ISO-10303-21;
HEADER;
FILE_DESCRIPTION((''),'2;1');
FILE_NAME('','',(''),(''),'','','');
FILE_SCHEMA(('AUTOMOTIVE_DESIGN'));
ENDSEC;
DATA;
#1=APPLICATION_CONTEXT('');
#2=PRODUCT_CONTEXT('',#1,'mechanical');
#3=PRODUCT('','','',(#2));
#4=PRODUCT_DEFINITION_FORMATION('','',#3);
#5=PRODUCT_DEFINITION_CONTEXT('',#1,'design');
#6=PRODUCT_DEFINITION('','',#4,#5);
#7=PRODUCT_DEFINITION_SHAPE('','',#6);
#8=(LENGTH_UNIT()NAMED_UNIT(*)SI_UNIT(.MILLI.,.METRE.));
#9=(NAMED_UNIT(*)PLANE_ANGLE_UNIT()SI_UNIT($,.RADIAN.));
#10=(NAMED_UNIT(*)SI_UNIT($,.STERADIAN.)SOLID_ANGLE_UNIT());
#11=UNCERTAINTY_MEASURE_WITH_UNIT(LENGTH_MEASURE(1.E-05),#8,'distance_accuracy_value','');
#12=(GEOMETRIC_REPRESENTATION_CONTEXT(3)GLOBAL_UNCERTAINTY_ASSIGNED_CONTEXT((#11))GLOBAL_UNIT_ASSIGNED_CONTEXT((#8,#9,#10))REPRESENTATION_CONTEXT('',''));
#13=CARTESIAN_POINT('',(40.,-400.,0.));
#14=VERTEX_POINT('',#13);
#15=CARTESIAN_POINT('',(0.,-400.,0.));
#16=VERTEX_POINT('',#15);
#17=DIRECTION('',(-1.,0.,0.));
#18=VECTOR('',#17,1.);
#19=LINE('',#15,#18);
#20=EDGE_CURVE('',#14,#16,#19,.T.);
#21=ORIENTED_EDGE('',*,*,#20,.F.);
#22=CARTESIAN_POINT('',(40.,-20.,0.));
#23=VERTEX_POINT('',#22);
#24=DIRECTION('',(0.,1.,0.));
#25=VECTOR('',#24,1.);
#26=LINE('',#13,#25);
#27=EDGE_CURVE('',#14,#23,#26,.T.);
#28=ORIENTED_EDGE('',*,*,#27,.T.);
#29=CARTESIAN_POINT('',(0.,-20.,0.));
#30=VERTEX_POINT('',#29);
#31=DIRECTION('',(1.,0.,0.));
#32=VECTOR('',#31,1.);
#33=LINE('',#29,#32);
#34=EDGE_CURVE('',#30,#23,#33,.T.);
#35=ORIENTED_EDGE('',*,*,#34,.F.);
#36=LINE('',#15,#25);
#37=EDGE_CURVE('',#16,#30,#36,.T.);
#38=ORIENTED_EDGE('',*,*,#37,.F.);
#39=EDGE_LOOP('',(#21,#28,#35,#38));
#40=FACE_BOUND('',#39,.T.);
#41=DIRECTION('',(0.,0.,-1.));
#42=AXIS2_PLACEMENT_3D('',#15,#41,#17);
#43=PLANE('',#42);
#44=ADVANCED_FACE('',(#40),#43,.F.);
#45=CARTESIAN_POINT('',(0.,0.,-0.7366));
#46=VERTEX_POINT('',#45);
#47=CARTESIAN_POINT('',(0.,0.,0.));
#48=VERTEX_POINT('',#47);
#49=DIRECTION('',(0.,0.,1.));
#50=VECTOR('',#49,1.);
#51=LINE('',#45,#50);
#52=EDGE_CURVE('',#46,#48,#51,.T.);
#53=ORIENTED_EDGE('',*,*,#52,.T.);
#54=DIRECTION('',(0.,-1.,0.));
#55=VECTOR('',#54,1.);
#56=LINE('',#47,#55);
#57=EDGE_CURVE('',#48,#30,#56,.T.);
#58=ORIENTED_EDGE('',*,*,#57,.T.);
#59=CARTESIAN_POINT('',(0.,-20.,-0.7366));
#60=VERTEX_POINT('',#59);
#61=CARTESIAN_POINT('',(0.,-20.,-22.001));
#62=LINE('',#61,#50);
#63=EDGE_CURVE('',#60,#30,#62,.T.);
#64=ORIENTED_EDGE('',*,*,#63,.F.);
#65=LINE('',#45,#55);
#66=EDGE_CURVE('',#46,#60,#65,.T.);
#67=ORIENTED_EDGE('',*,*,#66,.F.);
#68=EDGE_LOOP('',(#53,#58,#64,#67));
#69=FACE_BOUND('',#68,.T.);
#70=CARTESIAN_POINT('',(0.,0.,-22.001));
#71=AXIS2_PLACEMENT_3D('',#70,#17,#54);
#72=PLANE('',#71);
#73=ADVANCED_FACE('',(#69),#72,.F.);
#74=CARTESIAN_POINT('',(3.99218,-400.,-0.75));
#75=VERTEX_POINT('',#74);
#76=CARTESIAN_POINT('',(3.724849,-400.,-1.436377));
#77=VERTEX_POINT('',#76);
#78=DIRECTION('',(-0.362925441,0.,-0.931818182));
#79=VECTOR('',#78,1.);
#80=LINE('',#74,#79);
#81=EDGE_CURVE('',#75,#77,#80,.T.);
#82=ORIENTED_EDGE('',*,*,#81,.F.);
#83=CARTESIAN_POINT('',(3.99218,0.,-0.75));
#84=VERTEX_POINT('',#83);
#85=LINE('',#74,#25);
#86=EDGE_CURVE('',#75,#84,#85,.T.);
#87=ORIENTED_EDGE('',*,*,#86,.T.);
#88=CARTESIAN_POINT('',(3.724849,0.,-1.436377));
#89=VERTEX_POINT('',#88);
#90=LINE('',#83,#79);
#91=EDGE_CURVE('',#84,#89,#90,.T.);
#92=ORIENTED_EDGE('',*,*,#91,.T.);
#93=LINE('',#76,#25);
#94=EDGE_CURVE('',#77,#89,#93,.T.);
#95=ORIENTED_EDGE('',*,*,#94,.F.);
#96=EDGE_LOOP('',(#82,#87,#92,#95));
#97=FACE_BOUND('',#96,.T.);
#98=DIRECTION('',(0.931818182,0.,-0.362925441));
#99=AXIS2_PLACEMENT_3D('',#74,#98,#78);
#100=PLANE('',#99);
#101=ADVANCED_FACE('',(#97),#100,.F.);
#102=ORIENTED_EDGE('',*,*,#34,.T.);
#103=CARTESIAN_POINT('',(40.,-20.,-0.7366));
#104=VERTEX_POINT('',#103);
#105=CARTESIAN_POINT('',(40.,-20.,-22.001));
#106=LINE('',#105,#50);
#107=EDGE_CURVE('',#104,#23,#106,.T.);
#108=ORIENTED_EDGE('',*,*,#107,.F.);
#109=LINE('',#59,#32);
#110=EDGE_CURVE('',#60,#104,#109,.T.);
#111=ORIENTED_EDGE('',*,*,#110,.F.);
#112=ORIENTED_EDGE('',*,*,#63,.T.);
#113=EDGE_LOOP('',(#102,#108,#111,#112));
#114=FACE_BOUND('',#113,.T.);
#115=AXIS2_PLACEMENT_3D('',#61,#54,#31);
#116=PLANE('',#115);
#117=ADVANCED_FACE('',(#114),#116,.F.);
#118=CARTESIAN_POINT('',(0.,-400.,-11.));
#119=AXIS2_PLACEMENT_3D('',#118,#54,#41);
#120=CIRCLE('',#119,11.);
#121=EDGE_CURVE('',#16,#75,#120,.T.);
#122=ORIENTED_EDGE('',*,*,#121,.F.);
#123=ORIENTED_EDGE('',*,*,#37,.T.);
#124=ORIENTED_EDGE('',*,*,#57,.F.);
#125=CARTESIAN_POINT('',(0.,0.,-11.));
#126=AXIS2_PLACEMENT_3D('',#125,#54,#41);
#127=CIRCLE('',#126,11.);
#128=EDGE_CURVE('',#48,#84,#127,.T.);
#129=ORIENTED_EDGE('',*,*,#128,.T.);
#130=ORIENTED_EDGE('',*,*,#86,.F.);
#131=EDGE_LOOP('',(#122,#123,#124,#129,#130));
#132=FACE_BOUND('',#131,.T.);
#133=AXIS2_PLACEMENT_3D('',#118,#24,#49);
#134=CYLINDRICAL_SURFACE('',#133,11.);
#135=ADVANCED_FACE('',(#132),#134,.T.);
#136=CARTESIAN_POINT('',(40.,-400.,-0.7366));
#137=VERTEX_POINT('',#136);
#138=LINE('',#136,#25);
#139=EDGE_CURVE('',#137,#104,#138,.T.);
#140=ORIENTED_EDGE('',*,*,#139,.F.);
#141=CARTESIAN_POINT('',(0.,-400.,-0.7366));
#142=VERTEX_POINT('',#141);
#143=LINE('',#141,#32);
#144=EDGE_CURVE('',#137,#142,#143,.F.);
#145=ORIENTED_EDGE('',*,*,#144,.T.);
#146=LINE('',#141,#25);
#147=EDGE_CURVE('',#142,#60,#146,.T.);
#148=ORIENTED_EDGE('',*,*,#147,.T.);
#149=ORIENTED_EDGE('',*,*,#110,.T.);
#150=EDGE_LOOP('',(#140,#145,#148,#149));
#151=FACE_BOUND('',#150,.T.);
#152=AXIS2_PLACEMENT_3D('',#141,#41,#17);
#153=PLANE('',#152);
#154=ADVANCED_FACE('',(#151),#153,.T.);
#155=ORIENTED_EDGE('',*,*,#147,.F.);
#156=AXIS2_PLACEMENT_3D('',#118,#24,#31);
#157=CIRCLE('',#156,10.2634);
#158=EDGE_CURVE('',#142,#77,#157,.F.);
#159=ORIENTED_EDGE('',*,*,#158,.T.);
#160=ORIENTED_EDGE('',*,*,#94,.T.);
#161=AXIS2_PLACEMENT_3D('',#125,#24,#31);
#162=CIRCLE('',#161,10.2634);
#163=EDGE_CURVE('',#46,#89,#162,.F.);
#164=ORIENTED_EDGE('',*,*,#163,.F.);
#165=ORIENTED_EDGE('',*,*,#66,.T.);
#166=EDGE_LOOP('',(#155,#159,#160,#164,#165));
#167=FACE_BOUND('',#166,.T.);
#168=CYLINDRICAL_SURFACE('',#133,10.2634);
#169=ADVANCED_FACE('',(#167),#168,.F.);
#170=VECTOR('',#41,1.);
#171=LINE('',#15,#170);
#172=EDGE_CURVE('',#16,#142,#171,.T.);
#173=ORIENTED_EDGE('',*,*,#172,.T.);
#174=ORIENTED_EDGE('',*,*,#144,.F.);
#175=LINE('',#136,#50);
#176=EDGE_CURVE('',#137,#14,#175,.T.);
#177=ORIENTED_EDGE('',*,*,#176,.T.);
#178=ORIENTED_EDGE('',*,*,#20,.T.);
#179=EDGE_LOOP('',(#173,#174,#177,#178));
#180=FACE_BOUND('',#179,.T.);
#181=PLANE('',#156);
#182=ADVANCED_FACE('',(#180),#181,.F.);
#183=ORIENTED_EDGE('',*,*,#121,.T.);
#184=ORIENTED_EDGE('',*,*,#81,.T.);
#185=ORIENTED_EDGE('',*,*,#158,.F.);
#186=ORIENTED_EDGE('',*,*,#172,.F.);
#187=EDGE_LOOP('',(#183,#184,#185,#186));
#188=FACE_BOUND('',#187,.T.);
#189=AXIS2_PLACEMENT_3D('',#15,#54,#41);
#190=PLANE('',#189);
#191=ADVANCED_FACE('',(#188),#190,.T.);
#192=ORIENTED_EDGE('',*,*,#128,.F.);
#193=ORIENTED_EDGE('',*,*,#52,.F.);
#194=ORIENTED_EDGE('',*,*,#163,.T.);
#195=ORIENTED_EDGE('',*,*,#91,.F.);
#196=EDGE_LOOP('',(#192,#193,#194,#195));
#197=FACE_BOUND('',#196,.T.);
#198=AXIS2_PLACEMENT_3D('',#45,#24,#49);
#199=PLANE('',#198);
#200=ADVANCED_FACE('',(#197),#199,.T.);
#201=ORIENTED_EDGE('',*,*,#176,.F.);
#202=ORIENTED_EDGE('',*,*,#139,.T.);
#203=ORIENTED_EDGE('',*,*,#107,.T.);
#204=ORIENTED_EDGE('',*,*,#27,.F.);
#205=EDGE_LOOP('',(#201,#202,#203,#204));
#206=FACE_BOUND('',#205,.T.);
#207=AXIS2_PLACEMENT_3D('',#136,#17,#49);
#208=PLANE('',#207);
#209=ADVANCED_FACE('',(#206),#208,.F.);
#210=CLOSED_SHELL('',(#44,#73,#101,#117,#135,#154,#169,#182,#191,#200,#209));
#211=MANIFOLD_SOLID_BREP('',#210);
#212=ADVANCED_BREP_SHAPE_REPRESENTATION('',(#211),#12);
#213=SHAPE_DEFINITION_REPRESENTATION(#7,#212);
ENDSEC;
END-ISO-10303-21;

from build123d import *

# Parameters (mm, degrees)
ODGI_CIE_BAZOWE1_DEPTH     = 400
WYTNIJ_WYCI_GNI_CIE1_REACH = 404.597
SZKIC6_W                   = 40
SZKIC6_H                   = 20


# Sheet-metal steps are written as plain solids
with BuildPart() as part:
    # Szkic1 → Odgięcie bazowe1 (new body)
    with BuildSketch(Plane(origin=(0, 0, 0), x_dir=(1, 0, 0), z_dir=(0, 1, 0))):
        with BuildLine():
            ThreePointArc((3.992179856, 0.75), (-2.031009601, 21.810874155), (0, 0))
            Line((0, 0), (40, 0))
            Line((40, 0), (40, 0.7366))
            Line((40, 0.7366), (0, 0.7366))
            ThreePointArc((0, 0.7366), (-1.895005813, 21.08693871), (3.724848976, 1.436377273))
            Line((3.724848976, 1.436377273), (3.992179856, 0.75))
        make_face()
    extrude(amount=-ODGI_CIE_BAZOWE1_DEPTH)

    # Szkic6 → Wytnij-wyciągnięcie1 (cut, up to next)
    with BuildSketch(Plane.XY, mode=Mode.PRIVATE) as wytnij_wyci_gni_cie1_sk1:
        with Locations((20, -10)):
            Rectangle(SZKIC6_W, SZKIC6_H)
    wytnij_wyci_gni_cie1_tool1 = extrude(wytnij_wyci_gni_cie1_sk1.sketch, amount=-WYTNIJ_WYCI_GNI_CIE1_REACH, mode=Mode.PRIVATE) & part.part
    add(wytnij_wyci_gni_cie1_tool1.solids().sort_by_distance((20, -10, 0))[0], mode=Mode.SUBTRACT)


solid = part.part
